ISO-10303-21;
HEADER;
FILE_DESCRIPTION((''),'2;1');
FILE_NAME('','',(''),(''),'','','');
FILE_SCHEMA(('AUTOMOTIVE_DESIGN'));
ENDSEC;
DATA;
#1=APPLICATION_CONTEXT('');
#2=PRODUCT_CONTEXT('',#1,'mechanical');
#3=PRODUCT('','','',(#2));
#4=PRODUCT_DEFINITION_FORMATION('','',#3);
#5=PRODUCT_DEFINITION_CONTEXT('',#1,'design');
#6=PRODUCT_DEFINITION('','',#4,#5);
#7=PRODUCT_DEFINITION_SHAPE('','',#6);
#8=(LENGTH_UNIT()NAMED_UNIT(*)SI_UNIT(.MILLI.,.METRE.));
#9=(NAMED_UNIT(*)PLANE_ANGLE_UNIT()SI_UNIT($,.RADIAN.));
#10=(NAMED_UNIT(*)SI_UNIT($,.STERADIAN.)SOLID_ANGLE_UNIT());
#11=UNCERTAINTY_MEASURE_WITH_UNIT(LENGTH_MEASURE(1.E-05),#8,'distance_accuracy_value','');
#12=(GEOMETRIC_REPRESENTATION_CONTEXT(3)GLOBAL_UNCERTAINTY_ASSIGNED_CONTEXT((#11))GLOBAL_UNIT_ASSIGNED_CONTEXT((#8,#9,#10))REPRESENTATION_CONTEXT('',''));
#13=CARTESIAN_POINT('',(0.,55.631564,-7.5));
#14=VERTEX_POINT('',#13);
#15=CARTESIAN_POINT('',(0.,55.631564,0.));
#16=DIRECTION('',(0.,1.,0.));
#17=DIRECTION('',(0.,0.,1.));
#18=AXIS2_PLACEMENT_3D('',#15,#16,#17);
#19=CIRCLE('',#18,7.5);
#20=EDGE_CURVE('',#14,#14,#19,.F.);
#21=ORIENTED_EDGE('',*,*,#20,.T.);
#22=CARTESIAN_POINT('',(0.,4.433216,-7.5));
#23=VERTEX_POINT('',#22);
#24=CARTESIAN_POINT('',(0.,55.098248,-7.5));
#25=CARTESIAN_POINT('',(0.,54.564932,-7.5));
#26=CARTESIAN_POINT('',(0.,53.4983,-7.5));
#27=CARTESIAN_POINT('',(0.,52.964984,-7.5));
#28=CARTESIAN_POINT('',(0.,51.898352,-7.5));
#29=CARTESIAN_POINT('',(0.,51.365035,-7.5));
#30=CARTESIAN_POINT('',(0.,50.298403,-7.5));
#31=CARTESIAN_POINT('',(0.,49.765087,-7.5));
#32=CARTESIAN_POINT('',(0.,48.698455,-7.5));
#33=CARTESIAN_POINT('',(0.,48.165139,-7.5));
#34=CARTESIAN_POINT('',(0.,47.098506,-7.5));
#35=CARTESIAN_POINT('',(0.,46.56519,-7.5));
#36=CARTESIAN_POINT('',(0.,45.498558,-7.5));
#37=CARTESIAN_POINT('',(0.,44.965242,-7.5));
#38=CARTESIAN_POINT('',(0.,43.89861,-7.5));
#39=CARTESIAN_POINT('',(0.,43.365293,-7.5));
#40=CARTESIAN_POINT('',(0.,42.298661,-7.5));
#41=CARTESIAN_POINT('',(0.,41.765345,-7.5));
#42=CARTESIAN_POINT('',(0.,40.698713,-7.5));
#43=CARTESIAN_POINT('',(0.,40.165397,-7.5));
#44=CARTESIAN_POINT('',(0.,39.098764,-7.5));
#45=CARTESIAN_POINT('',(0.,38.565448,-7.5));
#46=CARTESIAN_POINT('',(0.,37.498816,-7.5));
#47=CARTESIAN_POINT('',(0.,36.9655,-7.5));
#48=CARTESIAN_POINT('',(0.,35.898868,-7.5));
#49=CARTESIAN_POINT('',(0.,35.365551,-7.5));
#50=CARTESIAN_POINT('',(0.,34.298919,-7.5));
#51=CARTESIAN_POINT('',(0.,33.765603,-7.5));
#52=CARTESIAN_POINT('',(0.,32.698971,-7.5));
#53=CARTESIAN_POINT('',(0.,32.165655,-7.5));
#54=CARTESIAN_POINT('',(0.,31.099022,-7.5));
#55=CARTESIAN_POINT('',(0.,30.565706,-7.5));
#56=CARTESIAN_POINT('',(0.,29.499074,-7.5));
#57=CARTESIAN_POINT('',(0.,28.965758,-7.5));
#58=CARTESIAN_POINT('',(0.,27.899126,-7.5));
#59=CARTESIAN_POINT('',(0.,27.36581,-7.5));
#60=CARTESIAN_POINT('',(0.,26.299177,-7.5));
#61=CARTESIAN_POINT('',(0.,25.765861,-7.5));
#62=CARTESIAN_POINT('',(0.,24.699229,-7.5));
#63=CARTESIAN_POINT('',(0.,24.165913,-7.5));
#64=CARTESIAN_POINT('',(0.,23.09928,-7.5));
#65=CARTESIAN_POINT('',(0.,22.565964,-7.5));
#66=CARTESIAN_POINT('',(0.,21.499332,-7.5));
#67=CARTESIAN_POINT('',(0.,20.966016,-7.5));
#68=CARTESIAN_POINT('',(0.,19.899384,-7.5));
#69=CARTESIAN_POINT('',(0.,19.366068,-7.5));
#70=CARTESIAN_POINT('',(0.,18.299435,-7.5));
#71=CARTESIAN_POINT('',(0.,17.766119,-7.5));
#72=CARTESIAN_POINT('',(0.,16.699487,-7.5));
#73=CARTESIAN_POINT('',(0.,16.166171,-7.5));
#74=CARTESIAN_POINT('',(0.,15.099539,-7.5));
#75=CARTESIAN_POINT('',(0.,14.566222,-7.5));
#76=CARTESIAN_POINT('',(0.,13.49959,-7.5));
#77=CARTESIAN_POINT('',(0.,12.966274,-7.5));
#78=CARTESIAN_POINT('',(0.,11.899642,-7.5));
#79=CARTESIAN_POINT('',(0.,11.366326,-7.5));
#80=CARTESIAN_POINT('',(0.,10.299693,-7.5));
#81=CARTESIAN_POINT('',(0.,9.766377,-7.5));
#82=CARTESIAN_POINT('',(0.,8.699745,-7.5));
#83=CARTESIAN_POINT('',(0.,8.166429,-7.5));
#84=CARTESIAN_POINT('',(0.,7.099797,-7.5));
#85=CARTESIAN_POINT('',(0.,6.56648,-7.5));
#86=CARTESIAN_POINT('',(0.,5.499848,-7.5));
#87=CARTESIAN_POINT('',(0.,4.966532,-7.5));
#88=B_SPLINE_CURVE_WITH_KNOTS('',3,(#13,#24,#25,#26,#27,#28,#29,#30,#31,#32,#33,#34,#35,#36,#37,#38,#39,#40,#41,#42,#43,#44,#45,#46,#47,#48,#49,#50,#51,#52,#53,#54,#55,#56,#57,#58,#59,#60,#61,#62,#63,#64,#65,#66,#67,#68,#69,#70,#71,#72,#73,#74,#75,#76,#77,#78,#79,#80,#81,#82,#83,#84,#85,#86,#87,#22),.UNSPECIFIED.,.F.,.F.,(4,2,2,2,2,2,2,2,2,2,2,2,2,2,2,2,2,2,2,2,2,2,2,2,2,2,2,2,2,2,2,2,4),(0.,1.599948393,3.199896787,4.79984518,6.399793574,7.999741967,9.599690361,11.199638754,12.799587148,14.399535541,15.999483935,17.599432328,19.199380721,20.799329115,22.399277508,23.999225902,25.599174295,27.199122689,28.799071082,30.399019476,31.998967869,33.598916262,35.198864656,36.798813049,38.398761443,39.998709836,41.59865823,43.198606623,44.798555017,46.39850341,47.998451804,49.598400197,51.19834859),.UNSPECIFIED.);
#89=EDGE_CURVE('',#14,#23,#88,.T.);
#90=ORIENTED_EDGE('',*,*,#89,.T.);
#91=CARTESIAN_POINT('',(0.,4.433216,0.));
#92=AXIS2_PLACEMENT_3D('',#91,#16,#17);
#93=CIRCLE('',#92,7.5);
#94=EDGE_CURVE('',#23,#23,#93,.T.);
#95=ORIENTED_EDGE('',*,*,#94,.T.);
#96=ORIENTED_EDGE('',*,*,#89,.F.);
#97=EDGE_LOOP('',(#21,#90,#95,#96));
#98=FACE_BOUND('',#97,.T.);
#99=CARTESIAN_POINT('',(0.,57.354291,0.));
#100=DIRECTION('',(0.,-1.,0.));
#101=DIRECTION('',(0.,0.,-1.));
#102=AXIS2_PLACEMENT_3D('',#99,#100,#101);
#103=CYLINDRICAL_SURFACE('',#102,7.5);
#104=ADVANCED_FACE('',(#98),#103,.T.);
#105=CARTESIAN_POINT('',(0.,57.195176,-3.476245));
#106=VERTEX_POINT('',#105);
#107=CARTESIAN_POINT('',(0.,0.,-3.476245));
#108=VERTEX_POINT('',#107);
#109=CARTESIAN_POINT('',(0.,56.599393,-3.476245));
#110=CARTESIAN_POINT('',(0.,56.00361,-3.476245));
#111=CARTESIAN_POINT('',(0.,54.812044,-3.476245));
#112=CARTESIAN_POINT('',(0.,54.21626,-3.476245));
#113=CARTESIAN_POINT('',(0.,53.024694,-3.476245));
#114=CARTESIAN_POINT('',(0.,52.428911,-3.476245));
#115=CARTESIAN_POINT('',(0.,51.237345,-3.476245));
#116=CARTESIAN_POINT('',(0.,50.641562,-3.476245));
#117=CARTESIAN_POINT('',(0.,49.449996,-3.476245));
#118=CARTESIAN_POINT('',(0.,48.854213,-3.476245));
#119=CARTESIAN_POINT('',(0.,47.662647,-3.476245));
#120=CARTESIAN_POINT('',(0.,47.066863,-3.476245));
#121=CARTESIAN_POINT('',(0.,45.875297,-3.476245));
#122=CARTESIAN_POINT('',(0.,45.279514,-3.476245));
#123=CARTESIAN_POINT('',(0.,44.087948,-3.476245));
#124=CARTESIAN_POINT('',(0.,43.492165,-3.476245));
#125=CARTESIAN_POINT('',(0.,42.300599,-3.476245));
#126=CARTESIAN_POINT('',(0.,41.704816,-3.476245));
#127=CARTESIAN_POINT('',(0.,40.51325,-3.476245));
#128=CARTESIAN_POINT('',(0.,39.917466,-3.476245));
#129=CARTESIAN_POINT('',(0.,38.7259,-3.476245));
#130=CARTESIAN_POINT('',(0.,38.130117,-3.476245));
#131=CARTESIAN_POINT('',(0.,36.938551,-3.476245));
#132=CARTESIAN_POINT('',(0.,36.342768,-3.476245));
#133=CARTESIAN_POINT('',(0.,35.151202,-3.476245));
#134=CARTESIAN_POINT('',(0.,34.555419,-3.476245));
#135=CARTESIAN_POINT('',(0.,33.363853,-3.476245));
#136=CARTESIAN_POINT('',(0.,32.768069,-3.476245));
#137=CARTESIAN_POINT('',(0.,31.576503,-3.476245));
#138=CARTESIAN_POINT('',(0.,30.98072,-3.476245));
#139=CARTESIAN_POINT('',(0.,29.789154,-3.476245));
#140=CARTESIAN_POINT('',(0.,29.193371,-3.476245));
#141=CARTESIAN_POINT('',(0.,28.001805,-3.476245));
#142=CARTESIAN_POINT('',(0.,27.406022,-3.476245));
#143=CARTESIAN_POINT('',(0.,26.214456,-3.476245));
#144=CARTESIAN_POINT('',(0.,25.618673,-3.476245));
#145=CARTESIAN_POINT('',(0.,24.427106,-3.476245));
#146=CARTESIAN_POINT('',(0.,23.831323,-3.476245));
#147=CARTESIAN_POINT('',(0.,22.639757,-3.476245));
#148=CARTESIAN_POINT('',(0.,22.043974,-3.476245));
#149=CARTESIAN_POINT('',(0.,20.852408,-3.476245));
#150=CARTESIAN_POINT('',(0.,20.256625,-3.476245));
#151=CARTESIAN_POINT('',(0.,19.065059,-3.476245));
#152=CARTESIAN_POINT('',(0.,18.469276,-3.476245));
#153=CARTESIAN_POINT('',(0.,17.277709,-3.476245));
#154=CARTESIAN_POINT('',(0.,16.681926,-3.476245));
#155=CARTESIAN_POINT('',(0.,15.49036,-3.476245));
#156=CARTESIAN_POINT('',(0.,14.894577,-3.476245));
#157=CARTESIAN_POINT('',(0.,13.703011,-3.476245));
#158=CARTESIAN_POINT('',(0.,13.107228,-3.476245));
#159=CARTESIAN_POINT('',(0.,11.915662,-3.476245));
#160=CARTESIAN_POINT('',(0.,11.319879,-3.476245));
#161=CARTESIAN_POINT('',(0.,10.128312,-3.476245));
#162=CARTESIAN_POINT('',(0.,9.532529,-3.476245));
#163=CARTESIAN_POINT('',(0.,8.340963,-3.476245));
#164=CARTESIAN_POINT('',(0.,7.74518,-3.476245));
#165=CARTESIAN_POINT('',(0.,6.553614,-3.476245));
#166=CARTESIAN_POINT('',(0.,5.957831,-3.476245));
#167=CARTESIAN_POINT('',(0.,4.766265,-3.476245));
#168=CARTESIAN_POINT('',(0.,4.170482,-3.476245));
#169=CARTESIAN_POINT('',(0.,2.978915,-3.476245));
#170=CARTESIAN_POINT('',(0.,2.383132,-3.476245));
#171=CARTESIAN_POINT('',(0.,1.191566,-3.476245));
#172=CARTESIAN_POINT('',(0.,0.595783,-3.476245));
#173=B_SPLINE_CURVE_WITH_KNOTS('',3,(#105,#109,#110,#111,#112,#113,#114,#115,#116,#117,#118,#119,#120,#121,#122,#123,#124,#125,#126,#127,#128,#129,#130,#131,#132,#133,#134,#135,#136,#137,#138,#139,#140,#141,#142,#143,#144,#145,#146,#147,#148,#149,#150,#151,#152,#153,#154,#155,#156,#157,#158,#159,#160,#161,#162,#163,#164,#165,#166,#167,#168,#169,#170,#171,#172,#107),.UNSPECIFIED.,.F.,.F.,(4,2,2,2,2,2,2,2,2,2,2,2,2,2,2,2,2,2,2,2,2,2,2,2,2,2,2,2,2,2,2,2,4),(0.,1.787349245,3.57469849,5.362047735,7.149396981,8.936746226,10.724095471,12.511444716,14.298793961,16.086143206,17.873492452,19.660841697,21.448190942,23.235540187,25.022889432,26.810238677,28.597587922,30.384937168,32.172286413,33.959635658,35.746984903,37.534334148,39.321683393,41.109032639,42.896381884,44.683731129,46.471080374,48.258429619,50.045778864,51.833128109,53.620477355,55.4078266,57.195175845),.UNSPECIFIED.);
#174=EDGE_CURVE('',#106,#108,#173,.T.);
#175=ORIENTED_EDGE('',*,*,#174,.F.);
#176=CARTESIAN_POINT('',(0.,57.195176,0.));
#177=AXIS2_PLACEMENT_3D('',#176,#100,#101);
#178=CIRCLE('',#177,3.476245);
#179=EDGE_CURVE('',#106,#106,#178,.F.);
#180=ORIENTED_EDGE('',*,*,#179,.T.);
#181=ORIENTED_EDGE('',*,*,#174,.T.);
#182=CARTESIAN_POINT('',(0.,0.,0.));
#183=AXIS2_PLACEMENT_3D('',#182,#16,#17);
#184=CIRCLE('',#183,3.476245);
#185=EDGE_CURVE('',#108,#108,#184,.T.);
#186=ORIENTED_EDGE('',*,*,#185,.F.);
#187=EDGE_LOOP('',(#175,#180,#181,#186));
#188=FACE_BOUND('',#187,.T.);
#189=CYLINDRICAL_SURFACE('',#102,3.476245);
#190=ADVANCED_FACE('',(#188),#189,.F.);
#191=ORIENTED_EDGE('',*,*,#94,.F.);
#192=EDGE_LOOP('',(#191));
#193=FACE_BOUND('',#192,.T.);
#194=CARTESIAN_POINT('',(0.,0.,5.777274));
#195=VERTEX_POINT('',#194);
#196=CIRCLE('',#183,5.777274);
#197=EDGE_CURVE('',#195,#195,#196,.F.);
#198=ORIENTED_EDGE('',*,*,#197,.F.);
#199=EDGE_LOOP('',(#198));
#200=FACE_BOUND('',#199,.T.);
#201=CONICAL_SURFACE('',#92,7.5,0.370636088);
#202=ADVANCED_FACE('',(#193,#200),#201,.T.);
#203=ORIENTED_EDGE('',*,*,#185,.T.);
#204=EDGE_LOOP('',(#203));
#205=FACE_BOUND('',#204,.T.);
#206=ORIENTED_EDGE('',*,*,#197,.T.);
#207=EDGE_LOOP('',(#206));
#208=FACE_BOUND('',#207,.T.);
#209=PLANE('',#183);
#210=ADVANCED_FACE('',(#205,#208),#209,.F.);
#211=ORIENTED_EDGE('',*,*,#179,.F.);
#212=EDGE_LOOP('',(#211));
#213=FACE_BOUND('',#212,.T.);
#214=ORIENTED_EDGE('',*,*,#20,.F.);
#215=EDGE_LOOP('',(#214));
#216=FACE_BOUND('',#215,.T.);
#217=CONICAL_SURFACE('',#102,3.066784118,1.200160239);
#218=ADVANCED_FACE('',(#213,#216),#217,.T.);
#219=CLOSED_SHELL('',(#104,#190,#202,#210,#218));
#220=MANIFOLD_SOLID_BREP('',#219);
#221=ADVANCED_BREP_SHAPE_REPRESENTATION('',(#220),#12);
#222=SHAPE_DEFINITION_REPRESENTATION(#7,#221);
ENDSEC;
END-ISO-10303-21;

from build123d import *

# Parameters (mm, degrees)
SKETCH1_R           = 7.5
BOSS_EXTRUDE1_DEPTH = 57.354291
SKETCH2_R           = 3.476245498
CUT_EXTRUDE1_DEPTH  = 59.326792267
CHAMFER1_SIZE       = 1.722726
CHAMFER1_SIZE_2     = 4.433216


with BuildPart() as part:
    # Sketch1 → Boss-Extrude1 (new body)
    with BuildSketch(Plane(origin=(0, 0, 0), x_dir=(1, 0, 0), z_dir=(0, 1, 0))):
        with Locations(Location((0, 0, 0), (0, 0, 90))):
            Circle(SKETCH1_R)
    extrude(amount=BOSS_EXTRUDE1_DEPTH)

    # Sketch2 → Cut-Extrude1 (cut, through all)
    with BuildSketch(Plane(origin=(0, 0, 0), x_dir=(1, 0, 0), z_dir=(0, 1, 0))):
        with Locations(Location((0, 0, 0), (0, 0, 90))):
            Circle(SKETCH2_R)
    extrude(amount=CUT_EXTRUDE1_DEPTH, mode=Mode.SUBTRACT)

    # Chamfer1
    # the kernel refuses this chamfer: 4.433216, 1.722726 mm, written as the material it takes off along each edge
    with BuildSketch(Plane(origin=(0, 57.354291, 0), x_dir=(0, 0, -1), z_dir=(1, 0, 0))) as chamfer1_piece_1:
        Polygon((7.5, -CHAMFER1_SIZE), (7.5 - CHAMFER1_SIZE_2, 0), (7.5, 0), align=None)
    revolve(axis=Axis((0, 57.354291, 0), (0, 1, 0)), mode=Mode.SUBTRACT)
    with BuildSketch(Plane(origin=(0, 0, 0), x_dir=(0, 0, -1), z_dir=(1, 0, 0))) as chamfer1_piece_2:
        Polygon((7.5, CHAMFER1_SIZE_2), (7.5 - CHAMFER1_SIZE, 0), (7.5, 0), align=None)
    revolve(axis=Axis((0, 0, 0), (0, 1, 0)), mode=Mode.SUBTRACT)


solid = part.part
